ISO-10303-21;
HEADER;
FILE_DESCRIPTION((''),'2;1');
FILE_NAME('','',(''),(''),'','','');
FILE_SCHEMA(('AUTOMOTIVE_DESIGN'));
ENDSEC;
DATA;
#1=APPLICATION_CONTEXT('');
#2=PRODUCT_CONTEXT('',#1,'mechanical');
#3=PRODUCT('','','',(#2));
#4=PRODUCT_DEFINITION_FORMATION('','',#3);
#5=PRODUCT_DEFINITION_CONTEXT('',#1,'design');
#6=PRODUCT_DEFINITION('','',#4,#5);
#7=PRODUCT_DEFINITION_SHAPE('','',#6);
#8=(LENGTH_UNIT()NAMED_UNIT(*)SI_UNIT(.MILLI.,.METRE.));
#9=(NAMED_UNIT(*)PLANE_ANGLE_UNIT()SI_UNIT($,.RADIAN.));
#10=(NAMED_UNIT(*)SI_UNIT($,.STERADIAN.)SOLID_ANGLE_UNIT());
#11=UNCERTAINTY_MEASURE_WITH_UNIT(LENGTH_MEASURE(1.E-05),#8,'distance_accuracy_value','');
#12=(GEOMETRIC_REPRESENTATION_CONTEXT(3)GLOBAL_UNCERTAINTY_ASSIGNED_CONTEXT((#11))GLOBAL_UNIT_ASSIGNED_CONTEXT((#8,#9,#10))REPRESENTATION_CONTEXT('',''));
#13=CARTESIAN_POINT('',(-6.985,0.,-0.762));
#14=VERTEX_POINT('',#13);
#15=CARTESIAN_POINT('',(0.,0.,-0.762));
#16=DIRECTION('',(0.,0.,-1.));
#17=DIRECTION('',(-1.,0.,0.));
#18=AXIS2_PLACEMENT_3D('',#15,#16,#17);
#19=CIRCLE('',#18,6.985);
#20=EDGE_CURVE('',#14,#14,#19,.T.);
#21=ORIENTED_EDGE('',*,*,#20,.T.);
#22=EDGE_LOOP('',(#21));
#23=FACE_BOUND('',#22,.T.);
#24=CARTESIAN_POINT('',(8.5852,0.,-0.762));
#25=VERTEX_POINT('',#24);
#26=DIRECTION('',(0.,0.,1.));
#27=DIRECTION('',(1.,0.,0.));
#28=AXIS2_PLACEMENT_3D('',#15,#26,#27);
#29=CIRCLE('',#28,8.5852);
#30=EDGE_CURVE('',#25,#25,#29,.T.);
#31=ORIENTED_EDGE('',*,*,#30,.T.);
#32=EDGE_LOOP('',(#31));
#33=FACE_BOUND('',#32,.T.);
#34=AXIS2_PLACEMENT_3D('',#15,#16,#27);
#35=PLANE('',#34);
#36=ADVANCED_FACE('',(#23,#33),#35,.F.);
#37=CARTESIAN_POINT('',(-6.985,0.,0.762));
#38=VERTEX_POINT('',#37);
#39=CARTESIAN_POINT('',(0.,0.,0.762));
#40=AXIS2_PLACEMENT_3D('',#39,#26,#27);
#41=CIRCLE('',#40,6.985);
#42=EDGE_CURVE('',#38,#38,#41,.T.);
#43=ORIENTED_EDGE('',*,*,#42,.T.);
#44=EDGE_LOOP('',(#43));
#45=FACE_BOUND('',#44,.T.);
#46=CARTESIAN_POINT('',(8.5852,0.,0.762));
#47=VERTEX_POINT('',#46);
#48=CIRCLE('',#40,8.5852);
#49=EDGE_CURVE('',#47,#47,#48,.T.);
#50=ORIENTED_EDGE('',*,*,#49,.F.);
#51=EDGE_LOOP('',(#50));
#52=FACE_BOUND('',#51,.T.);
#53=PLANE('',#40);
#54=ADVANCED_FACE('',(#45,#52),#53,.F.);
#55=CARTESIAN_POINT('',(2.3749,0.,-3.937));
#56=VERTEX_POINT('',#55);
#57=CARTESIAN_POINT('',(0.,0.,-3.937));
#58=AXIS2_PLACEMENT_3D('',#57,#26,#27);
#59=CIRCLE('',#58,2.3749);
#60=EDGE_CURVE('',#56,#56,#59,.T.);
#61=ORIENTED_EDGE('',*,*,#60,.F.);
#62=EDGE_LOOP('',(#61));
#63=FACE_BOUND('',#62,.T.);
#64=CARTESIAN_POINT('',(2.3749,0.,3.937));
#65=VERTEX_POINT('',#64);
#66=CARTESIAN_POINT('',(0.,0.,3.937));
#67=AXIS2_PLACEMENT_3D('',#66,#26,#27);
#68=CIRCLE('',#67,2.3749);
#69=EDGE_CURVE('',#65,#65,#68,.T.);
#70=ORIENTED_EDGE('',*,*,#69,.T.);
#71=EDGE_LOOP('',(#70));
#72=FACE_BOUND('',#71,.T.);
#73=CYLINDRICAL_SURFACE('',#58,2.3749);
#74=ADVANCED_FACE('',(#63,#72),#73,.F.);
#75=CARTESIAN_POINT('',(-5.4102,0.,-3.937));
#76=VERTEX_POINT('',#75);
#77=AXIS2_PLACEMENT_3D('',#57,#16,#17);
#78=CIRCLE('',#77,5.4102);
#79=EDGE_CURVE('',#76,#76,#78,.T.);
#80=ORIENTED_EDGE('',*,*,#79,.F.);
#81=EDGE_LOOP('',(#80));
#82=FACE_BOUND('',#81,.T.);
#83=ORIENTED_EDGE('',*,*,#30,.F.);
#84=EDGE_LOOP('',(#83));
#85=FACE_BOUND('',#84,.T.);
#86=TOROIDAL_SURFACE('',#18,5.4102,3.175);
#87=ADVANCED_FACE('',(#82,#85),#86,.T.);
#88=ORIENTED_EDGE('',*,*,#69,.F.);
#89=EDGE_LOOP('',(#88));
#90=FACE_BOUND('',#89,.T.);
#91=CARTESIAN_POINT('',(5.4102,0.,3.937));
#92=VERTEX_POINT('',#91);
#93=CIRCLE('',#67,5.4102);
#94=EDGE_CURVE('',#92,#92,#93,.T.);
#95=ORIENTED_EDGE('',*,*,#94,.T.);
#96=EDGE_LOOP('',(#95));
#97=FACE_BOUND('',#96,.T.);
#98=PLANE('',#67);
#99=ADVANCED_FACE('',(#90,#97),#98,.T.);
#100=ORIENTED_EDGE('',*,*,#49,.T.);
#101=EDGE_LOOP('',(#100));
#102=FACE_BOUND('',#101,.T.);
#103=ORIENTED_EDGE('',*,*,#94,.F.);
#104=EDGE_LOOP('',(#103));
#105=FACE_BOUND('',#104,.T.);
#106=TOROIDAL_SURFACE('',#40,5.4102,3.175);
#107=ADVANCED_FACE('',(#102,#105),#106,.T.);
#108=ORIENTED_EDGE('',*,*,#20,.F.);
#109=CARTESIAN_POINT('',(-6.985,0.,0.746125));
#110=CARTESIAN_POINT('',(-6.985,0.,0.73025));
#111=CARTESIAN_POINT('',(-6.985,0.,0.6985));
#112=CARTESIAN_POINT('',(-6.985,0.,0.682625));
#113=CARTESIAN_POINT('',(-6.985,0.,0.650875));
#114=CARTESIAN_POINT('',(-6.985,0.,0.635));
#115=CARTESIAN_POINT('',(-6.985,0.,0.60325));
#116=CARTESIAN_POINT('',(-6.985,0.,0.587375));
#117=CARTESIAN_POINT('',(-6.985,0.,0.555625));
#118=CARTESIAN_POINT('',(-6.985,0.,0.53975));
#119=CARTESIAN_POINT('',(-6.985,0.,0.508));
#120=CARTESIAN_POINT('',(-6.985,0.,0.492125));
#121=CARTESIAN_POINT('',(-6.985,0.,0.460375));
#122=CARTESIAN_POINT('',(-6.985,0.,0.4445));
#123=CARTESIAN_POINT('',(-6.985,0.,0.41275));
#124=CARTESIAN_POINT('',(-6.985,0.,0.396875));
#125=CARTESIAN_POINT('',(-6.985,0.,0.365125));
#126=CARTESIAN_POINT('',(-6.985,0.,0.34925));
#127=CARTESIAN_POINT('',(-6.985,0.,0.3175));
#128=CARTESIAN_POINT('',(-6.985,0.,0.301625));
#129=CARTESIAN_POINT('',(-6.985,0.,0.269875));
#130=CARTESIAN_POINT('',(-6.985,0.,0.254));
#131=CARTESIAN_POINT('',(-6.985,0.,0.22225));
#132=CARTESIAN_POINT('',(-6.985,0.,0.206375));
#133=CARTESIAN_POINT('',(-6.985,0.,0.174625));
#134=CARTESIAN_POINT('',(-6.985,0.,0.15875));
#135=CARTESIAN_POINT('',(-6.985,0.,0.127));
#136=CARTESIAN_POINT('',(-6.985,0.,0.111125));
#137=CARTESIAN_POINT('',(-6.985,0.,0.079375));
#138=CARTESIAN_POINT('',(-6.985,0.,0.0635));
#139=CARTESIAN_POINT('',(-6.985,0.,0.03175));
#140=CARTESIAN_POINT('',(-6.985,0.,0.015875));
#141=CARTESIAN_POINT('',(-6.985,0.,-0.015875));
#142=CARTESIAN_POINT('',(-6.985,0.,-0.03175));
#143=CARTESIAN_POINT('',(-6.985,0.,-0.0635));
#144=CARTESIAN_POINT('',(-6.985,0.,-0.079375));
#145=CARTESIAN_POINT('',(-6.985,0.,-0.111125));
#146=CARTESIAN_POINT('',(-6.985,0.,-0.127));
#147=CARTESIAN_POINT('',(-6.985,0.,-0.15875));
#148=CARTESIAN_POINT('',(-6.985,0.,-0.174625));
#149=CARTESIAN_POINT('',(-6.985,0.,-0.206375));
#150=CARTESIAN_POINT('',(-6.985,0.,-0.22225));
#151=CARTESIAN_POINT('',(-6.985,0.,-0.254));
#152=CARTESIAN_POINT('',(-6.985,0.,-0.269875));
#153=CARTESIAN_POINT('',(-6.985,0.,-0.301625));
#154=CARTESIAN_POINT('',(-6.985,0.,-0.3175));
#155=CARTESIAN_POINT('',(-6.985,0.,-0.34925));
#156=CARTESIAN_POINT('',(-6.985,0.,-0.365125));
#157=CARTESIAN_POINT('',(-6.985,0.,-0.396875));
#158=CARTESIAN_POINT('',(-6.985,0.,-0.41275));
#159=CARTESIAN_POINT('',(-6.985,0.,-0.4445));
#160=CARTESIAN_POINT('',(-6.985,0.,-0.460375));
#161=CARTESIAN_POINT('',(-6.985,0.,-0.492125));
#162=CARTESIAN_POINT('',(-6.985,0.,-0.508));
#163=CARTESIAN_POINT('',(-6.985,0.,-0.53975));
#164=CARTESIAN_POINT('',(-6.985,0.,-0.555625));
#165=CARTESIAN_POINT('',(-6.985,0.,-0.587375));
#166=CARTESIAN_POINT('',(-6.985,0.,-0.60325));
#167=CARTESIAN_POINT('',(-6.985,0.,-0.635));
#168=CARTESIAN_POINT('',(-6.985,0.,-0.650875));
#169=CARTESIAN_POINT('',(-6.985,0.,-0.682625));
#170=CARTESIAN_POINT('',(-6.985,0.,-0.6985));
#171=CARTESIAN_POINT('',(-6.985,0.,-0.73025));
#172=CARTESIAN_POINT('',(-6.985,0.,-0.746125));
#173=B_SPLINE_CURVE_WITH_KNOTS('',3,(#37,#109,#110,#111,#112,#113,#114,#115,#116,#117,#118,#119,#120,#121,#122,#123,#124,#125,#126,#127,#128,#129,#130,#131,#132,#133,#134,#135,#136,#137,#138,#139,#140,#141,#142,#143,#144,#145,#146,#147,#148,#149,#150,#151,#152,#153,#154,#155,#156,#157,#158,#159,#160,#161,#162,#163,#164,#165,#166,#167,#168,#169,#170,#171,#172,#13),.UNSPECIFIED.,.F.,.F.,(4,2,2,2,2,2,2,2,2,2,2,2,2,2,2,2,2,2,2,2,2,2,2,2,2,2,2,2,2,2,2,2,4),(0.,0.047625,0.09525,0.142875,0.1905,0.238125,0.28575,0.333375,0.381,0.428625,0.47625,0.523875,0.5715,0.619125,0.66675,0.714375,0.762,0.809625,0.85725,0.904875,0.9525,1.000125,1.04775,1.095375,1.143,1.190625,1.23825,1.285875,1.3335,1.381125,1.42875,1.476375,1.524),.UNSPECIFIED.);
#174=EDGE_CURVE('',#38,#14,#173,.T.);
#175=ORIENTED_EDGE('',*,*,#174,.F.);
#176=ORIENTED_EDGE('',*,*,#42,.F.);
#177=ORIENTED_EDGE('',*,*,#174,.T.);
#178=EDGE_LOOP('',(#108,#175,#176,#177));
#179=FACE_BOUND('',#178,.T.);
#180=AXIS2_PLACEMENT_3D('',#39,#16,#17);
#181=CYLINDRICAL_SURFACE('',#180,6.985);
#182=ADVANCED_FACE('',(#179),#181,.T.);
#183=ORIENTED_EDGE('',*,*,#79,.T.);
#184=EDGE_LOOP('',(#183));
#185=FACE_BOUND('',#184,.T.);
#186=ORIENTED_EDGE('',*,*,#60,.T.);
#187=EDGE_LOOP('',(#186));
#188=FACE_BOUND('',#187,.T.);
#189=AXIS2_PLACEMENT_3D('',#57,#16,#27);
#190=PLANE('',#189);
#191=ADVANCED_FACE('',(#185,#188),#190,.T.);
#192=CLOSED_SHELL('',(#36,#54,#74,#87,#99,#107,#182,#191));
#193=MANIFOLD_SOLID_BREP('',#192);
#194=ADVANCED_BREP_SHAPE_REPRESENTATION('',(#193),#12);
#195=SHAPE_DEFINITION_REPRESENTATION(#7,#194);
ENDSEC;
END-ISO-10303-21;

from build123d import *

# Parameters (mm, degrees)
SKETCH3_R            = 6.985
BASE_EXTRUDE_DEPTH   = 0.762
SKETCH4_R            = 8.5852
BOSS_EXTRUDE2_DEPTH  = 3.175
FILLET1_R            = 3.175
FILLET1_OF_MIRROR1_R = 3.175
SKETCH5_R            = 2.3749
CUT_EXTRUDE1_DEPTH   = 15.47104687


with BuildPart() as part:
    # Sketch3 → Base-Extrude (new, symmetric)
    with BuildSketch(Plane.XY):
        with Locations(Location((0, 0, 0), (0, 0, 180))):
            Circle(SKETCH3_R)
    extrude(amount=BASE_EXTRUDE_DEPTH, both=True)

    # Sketch4 → Boss-Extrude2 (add)
    with BuildSketch(Plane.XY.offset(0.762)):
        Circle(SKETCH4_R)
    boss_extrude2 = extrude(amount=BOSS_EXTRUDE2_DEPTH)

    # Fillet1
    fillet1_edges = [part.edges().sort_by_distance(p)[0] for p in [
        (-8.5852, 0, 3.937),
    ]]
    fillet(fillet1_edges, radius=FILLET1_R - 0.0001)  # a hair under: the kernel refuses the full size

    # Mirror1: Boss-Extrude2 across plane
    add(boss_extrude2.mirror(Plane.XY))

    # Fillet1 of Mirror1
    fillet1_of_mirror1_edges = [part.edges().sort_by_distance(p)[0] for p in [
        (-8.5852, 0, -3.937),
    ]]
    fillet(fillet1_of_mirror1_edges, radius=FILLET1_OF_MIRROR1_R - 0.0001)  # a hair under: the kernel refuses the full size

    # Sketch5 → Cut-Extrude1 (cut, through all)
    with BuildSketch(Plane.XY.offset(3.937)):
        Circle(SKETCH5_R)
    extrude(amount=-CUT_EXTRUDE1_DEPTH, mode=Mode.SUBTRACT)


solid = part.part
